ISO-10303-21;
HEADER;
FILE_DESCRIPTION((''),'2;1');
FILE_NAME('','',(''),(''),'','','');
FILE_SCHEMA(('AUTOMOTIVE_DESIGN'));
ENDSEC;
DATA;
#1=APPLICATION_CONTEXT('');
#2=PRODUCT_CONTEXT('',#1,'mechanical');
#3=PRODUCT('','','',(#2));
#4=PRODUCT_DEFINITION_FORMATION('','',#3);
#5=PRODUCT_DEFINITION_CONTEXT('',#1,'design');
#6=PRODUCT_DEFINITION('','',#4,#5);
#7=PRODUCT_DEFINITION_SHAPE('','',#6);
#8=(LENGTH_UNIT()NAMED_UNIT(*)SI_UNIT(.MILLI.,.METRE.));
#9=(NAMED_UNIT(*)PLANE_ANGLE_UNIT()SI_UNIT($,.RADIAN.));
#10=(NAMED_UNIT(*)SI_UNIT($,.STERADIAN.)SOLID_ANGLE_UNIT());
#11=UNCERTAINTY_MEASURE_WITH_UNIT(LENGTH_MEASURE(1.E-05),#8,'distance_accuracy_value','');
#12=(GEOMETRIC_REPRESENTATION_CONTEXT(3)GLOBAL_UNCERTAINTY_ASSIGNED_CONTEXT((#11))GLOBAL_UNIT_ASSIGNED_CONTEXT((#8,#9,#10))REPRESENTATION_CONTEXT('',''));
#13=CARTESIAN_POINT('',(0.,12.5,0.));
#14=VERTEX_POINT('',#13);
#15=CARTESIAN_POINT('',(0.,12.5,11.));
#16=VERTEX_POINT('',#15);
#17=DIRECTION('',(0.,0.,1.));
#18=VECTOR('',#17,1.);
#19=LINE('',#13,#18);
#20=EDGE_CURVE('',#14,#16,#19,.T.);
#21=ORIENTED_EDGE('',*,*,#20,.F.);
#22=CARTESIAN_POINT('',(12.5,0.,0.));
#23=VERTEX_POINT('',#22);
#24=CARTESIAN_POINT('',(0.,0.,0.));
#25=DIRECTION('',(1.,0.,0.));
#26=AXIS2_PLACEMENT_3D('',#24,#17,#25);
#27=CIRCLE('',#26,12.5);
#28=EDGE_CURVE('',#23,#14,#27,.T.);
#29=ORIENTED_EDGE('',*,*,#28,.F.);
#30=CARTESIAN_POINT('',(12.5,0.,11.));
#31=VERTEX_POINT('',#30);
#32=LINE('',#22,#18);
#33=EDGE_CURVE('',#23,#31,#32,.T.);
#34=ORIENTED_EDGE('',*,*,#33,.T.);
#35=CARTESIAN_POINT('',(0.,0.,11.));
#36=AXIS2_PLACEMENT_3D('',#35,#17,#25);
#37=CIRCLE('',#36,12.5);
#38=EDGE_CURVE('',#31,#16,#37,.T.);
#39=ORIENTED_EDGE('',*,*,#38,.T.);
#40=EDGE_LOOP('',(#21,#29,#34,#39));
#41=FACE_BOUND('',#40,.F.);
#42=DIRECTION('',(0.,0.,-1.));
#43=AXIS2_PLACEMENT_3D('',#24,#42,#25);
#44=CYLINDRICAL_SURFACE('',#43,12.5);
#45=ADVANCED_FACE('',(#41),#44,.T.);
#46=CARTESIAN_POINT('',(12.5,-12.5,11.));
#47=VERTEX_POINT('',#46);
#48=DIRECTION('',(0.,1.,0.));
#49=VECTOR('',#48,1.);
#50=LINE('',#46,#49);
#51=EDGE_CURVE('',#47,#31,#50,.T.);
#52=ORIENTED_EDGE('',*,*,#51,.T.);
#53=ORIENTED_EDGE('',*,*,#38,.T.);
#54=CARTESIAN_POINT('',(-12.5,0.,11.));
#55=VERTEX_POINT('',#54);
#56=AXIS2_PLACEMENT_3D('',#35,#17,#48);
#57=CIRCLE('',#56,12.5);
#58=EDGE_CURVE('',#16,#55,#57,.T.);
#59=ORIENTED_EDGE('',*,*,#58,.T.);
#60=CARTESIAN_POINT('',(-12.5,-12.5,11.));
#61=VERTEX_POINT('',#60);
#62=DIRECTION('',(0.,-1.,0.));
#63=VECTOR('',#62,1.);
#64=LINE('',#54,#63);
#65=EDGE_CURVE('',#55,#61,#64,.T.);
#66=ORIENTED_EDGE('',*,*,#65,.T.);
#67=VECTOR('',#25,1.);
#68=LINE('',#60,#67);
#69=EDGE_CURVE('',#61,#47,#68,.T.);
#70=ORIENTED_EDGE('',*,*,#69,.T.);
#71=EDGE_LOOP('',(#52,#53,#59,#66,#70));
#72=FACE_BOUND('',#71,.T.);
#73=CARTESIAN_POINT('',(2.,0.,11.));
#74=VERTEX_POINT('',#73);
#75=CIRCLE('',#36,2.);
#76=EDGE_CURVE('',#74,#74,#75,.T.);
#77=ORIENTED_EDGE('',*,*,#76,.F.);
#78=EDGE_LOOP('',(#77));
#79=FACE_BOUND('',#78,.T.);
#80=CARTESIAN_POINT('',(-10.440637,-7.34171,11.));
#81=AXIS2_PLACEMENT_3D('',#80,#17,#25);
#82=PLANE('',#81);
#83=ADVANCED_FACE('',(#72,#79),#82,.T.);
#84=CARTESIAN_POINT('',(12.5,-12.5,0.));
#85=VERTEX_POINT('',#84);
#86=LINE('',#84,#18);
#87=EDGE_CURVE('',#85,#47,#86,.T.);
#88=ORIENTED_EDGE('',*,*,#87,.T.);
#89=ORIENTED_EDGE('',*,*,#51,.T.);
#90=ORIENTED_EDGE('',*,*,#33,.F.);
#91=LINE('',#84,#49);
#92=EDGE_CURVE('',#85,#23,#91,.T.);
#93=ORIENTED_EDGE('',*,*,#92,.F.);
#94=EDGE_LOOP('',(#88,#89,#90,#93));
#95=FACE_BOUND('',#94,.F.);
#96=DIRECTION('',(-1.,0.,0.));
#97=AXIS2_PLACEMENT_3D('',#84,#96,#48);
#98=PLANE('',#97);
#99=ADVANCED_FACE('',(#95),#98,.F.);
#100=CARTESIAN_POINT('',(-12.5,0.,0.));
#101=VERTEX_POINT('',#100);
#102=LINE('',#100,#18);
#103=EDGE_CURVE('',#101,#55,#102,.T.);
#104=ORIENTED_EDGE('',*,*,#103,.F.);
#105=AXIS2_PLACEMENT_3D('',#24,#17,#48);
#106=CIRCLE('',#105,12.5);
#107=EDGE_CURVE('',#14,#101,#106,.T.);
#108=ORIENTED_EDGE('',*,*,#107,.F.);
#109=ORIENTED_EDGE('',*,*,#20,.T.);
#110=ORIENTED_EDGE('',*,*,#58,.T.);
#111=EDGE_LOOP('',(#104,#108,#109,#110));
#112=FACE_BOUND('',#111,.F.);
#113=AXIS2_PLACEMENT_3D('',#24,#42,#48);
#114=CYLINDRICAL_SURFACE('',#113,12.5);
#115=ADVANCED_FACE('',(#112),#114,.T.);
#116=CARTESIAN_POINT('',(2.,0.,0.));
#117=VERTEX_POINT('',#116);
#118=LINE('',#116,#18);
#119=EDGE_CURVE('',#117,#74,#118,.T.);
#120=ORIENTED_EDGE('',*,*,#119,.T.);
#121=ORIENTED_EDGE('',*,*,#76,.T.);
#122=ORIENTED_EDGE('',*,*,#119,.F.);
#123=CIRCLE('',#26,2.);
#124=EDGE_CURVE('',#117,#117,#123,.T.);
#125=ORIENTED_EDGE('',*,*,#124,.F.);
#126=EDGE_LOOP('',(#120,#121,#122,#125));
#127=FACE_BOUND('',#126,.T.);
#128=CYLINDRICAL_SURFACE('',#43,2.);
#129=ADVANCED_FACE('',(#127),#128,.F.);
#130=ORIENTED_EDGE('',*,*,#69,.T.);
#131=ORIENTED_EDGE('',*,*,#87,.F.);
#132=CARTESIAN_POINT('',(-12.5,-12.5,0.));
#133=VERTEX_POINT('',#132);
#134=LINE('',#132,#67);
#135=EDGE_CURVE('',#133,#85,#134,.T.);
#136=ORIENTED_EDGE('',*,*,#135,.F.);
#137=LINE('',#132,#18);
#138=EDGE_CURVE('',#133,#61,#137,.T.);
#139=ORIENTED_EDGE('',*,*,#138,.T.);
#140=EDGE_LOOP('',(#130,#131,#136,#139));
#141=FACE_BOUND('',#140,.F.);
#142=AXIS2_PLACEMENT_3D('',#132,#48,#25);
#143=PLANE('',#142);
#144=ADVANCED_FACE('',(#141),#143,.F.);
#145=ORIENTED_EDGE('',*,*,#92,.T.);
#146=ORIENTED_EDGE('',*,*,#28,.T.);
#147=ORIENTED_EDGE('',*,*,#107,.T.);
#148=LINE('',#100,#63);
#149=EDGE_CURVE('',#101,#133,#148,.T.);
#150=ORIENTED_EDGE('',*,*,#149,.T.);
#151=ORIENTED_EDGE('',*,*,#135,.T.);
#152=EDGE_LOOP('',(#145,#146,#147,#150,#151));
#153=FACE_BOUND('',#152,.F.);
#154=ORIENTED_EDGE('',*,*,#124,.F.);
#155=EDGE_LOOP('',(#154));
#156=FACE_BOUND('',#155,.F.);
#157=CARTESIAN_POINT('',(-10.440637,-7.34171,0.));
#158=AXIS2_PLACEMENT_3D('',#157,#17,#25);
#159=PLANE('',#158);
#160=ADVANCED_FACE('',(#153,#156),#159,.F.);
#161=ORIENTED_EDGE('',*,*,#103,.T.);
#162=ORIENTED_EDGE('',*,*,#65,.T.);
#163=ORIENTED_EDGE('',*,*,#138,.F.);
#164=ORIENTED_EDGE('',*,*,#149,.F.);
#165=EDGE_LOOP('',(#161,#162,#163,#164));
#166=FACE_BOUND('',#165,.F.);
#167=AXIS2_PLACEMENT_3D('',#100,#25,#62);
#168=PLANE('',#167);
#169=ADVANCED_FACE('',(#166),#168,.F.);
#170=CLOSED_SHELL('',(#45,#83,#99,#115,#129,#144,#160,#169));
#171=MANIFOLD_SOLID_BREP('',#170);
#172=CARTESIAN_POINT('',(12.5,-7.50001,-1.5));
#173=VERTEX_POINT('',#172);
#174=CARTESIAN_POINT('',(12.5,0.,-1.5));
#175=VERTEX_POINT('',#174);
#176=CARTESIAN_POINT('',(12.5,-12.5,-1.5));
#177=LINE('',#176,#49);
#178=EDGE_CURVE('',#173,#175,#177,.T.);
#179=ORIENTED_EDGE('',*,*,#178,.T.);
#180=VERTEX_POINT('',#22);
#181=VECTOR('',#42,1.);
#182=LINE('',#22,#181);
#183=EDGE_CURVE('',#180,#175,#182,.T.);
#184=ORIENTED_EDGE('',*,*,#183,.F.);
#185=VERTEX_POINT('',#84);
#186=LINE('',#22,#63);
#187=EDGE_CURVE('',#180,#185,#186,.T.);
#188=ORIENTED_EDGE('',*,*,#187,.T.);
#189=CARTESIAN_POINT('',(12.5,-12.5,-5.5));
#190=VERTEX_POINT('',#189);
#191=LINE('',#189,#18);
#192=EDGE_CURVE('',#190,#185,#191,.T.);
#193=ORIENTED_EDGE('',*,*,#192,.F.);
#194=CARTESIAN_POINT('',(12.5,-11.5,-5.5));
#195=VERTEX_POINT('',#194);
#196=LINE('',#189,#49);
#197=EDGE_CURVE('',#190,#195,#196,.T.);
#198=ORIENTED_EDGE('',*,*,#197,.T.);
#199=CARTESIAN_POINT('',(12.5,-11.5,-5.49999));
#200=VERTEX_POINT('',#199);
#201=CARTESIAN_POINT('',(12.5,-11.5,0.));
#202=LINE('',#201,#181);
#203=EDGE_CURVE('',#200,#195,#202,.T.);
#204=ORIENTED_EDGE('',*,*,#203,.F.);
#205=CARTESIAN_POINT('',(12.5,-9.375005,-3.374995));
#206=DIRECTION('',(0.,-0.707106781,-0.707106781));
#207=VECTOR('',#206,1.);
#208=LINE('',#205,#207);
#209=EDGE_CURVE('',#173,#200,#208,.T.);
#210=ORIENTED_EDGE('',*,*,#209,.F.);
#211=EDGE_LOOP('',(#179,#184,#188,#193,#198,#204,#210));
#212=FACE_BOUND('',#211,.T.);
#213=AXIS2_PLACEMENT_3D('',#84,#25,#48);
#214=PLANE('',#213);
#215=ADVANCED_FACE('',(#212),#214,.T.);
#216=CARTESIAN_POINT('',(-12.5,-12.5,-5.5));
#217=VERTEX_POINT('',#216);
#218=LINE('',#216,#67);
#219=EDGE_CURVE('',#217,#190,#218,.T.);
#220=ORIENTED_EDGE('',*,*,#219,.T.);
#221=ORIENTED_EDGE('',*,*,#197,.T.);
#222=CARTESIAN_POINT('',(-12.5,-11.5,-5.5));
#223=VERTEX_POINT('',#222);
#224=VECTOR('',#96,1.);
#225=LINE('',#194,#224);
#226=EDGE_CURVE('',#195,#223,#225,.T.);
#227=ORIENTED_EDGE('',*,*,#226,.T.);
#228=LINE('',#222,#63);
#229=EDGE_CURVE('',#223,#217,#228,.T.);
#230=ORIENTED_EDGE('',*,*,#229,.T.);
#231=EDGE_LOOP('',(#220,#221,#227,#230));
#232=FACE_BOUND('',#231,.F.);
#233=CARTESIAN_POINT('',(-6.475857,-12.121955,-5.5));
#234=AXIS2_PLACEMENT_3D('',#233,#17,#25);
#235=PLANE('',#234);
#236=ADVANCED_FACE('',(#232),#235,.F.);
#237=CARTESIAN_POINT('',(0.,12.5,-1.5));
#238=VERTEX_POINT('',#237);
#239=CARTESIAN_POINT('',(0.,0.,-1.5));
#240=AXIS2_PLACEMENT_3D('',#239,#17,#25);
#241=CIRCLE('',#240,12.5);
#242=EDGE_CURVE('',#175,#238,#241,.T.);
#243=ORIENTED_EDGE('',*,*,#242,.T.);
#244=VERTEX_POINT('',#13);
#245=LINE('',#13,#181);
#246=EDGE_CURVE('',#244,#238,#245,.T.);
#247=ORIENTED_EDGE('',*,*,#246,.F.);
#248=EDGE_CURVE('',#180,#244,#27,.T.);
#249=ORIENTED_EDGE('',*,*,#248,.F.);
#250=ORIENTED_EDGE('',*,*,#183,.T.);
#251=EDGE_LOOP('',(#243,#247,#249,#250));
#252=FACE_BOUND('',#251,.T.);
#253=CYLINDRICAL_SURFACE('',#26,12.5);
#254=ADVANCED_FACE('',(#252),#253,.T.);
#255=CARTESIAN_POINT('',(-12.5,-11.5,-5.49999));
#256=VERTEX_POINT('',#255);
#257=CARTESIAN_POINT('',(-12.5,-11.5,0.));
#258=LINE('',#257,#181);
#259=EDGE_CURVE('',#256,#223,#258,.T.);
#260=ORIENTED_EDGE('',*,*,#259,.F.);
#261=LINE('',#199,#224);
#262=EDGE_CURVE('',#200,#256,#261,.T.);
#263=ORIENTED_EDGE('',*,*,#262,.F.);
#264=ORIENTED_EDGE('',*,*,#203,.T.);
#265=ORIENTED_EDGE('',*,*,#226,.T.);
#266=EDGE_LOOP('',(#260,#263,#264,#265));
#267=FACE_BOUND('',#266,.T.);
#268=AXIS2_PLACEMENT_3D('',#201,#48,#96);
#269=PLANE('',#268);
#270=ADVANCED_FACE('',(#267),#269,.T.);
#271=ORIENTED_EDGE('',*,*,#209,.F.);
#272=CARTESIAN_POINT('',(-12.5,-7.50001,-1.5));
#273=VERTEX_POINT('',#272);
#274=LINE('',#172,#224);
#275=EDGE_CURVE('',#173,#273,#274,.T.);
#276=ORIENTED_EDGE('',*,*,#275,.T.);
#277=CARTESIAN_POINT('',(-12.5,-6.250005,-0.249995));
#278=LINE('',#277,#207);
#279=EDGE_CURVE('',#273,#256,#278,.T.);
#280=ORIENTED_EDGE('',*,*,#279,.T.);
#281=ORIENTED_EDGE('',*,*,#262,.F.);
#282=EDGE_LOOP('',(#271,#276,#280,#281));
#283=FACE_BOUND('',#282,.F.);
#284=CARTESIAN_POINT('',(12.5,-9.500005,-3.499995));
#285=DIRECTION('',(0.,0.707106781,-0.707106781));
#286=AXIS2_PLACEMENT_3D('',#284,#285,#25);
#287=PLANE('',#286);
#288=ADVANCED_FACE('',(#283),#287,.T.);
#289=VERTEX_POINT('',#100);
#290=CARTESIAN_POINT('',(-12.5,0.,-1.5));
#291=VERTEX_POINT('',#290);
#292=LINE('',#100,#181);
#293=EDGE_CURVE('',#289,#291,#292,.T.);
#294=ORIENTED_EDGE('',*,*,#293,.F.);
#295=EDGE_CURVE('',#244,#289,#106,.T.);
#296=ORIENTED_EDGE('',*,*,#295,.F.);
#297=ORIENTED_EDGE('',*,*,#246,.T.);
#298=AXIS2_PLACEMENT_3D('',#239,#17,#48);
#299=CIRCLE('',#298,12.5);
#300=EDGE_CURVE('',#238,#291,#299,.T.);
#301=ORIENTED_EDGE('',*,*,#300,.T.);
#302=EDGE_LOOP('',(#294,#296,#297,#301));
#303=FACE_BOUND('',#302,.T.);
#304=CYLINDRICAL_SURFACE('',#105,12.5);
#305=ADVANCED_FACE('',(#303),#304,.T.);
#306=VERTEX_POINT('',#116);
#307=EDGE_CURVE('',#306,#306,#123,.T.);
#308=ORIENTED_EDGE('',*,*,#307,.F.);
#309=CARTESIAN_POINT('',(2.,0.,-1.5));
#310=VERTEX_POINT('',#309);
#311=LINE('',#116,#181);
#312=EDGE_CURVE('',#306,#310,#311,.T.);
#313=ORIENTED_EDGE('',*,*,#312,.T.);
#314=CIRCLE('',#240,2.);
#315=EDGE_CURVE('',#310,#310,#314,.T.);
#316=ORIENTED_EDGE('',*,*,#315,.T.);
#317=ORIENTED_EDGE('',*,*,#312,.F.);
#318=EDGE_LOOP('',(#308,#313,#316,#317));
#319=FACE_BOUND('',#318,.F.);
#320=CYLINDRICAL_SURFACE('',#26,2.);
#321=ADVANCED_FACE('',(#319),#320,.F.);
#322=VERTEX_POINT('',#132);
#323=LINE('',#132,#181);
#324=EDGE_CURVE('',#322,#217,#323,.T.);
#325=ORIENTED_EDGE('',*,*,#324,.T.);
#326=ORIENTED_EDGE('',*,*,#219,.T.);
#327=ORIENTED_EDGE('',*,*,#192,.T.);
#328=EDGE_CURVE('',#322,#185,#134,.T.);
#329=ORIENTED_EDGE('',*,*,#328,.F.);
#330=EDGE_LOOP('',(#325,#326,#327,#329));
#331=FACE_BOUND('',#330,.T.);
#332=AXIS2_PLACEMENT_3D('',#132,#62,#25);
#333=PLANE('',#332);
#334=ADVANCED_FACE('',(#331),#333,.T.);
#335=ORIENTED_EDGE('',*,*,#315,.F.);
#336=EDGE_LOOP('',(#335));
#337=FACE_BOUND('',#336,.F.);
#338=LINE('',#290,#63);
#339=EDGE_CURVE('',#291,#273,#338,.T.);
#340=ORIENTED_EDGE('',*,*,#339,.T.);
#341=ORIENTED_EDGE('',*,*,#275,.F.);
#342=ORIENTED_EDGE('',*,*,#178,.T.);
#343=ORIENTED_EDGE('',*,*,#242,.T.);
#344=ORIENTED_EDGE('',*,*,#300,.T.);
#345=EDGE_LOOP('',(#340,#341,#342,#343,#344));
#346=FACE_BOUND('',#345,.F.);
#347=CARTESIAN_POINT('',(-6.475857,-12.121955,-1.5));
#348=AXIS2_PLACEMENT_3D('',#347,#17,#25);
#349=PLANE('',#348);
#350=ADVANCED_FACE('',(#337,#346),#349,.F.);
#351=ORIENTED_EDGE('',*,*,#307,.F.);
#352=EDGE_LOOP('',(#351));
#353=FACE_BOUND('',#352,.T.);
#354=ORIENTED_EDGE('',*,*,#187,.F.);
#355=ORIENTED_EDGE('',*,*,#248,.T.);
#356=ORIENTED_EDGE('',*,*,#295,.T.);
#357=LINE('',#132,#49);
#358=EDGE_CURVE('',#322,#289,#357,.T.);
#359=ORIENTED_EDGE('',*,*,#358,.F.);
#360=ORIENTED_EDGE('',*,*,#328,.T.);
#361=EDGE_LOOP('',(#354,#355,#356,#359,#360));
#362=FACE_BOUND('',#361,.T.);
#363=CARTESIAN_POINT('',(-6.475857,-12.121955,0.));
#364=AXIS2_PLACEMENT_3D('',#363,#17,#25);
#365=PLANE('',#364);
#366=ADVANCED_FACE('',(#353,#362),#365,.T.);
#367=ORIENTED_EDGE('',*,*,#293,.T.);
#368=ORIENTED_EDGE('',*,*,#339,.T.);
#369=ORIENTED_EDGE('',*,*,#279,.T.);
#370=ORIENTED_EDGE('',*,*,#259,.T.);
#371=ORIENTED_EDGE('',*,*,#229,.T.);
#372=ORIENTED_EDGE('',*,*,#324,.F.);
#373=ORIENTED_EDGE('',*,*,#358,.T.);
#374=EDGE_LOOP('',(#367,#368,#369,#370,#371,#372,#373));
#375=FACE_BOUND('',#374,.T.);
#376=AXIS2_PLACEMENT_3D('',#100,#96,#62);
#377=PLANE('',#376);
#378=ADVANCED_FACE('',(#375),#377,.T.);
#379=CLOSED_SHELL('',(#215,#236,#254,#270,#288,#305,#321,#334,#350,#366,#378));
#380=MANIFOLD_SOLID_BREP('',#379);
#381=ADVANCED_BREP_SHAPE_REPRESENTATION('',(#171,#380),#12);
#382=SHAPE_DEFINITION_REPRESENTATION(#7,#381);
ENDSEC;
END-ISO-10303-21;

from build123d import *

# Parameters (mm, degrees)
F1_R     = 2
F2_DEPTH = 11
F3_DEPTH = 1.5
F5_DEPTH = 5.5
F6_SIZE  = 3.99999


# Not quite as in the source:
# - a fillet or chamfer is up to 0.001 mm smaller than in the source, because OpenCascade refuses the exact size


with BuildPart() as f2:
    # F1 (on Top) → F2 (new body)
    with BuildSketch(Plane.XY):
        with BuildLine():
            ThreePointArc((-4.8989794856, -11.5), (-10.4280209908, -6.8924870849), (-12.5, 0))
            Line((-12.5, 0), (-12.5, -11.5))
            Line((-12.5, -11.5), (-4.8989794856, -11.5))
        make_face()
        with BuildLine():
            ThreePointArc((4.8989794856, -11.5), (10.4280209908, -6.8924870849), (12.5, 0))
            ThreePointArc((12.5, 0), (8.8388347648, 8.8388347648), (0, 12.5))
            ThreePointArc((0, 12.5), (-8.8388347648, 8.8388347648), (-12.5, 0))
            ThreePointArc((-12.5, 0), (-10.4280209908, -6.8924870849), (-4.8989794856, -11.5))
            Line((-4.8989794856, -11.5), (4.8989794856, -11.5))
        make_face()
        Circle(F1_R, mode=Mode.SUBTRACT)
        with BuildLine():
            Line((12.5, -11.5), (12.5, 0))
            ThreePointArc((12.5, 0), (10.4280209908, -6.8924870849), (4.8989794856, -11.5))
            Line((4.8989794856, -11.5), (12.5, -11.5))
        make_face()
        with BuildLine():
            Line((-12.5, -12.5), (0, -12.5))
            ThreePointArc((0, -12.5), (-2.5, -12.2474487139), (-4.8989794856, -11.5))
            Line((-4.8989794856, -11.5), (-12.5, -11.5))
            Line((-12.5, -11.5), (-12.5, -12.5))
        make_face()
        with BuildLine():
            ThreePointArc((0, -12.5), (2.5, -12.2474487139), (4.8989794856, -11.5))
            Line((4.8989794856, -11.5), (-4.8989794856, -11.5))
            ThreePointArc((-4.8989794856, -11.5), (-2.5, -12.2474487139), (0, -12.5))
        make_face()
        with BuildLine():
            Line((12.5, -11.5), (4.8989794856, -11.5))
            ThreePointArc((4.8989794856, -11.5), (2.5, -12.2474487139), (0, -12.5))
            Line((0, -12.5), (12.5, -12.5))
            Line((12.5, -12.5), (12.5, -11.5))
        make_face()
    extrude(amount=F2_DEPTH)


with BuildPart() as f3:
    # F1 (on Top) → F3 (new body)
    with BuildSketch(Plane.XY):
        with BuildLine():
            Line((-12.5, -12.5), (0, -12.5))
            ThreePointArc((0, -12.5), (-2.5, -12.2474487139), (-4.8989794856, -11.5))
            Line((-4.8989794856, -11.5), (-12.5, -11.5))
            Line((-12.5, -11.5), (-12.5, -12.5))
        make_face()
        with BuildLine():
            ThreePointArc((0, -12.5), (2.5, -12.2474487139), (4.8989794856, -11.5))
            Line((4.8989794856, -11.5), (-4.8989794856, -11.5))
            ThreePointArc((-4.8989794856, -11.5), (-2.5, -12.2474487139), (0, -12.5))
        make_face()
        with BuildLine():
            Line((12.5, -11.5), (4.8989794856, -11.5))
            ThreePointArc((4.8989794856, -11.5), (2.5, -12.2474487139), (0, -12.5))
            Line((0, -12.5), (12.5, -12.5))
            Line((12.5, -12.5), (12.5, -11.5))
        make_face()
        with BuildLine():
            Line((12.5, -11.5), (12.5, 0))
            ThreePointArc((12.5, 0), (10.4280209908, -6.8924870849), (4.8989794856, -11.5))
            Line((4.8989794856, -11.5), (12.5, -11.5))
        make_face()
        with BuildLine():
            ThreePointArc((4.8989794856, -11.5), (10.4280209908, -6.8924870849), (12.5, 0))
            ThreePointArc((12.5, 0), (8.8388347648, 8.8388347648), (0, 12.5))
            ThreePointArc((0, 12.5), (-8.8388347648, 8.8388347648), (-12.5, 0))
            ThreePointArc((-12.5, 0), (-10.4280209908, -6.8924870849), (-4.8989794856, -11.5))
            Line((-4.8989794856, -11.5), (4.8989794856, -11.5))
        make_face()
        Circle(F1_R, mode=Mode.SUBTRACT)
        with BuildLine():
            ThreePointArc((-4.8989794856, -11.5), (-10.4280209908, -6.8924870849), (-12.5, 0))
            Line((-12.5, 0), (-12.5, -11.5))
            Line((-12.5, -11.5), (-4.8989794856, -11.5))
        make_face()
    extrude(amount=-F3_DEPTH)

    # F1 (on Top) → F5 (join)
    with BuildSketch(Plane.XY):
        with BuildLine():
            Line((-12.5, -12.5), (0, -12.5))
            ThreePointArc((0, -12.5), (-2.5, -12.2474487139), (-4.8989794856, -11.5))
            Line((-4.8989794856, -11.5), (-12.5, -11.5))
            Line((-12.5, -11.5), (-12.5, -12.5))
        make_face()
        with BuildLine():
            ThreePointArc((0, -12.5), (2.5, -12.2474487139), (4.8989794856, -11.5))
            Line((4.8989794856, -11.5), (-4.8989794856, -11.5))
            ThreePointArc((-4.8989794856, -11.5), (-2.5, -12.2474487139), (0, -12.5))
        make_face()
        with BuildLine():
            Line((12.5, -11.5), (4.8989794856, -11.5))
            ThreePointArc((4.8989794856, -11.5), (2.5, -12.2474487139), (0, -12.5))
            Line((0, -12.5), (12.5, -12.5))
            Line((12.5, -12.5), (12.5, -11.5))
        make_face()
    extrude(amount=-F5_DEPTH)

    # F6 (size 4 in the source; OpenCascade refuses exactly that, so slightly less here)
    f6_edges = [f3.edges().sort_by_distance(p)[0] for p in [
        (0, -11.5, -1.5),
    ]]
    chamfer(f6_edges, length=F6_SIZE)


solid = Compound([f2.part, f3.part])
